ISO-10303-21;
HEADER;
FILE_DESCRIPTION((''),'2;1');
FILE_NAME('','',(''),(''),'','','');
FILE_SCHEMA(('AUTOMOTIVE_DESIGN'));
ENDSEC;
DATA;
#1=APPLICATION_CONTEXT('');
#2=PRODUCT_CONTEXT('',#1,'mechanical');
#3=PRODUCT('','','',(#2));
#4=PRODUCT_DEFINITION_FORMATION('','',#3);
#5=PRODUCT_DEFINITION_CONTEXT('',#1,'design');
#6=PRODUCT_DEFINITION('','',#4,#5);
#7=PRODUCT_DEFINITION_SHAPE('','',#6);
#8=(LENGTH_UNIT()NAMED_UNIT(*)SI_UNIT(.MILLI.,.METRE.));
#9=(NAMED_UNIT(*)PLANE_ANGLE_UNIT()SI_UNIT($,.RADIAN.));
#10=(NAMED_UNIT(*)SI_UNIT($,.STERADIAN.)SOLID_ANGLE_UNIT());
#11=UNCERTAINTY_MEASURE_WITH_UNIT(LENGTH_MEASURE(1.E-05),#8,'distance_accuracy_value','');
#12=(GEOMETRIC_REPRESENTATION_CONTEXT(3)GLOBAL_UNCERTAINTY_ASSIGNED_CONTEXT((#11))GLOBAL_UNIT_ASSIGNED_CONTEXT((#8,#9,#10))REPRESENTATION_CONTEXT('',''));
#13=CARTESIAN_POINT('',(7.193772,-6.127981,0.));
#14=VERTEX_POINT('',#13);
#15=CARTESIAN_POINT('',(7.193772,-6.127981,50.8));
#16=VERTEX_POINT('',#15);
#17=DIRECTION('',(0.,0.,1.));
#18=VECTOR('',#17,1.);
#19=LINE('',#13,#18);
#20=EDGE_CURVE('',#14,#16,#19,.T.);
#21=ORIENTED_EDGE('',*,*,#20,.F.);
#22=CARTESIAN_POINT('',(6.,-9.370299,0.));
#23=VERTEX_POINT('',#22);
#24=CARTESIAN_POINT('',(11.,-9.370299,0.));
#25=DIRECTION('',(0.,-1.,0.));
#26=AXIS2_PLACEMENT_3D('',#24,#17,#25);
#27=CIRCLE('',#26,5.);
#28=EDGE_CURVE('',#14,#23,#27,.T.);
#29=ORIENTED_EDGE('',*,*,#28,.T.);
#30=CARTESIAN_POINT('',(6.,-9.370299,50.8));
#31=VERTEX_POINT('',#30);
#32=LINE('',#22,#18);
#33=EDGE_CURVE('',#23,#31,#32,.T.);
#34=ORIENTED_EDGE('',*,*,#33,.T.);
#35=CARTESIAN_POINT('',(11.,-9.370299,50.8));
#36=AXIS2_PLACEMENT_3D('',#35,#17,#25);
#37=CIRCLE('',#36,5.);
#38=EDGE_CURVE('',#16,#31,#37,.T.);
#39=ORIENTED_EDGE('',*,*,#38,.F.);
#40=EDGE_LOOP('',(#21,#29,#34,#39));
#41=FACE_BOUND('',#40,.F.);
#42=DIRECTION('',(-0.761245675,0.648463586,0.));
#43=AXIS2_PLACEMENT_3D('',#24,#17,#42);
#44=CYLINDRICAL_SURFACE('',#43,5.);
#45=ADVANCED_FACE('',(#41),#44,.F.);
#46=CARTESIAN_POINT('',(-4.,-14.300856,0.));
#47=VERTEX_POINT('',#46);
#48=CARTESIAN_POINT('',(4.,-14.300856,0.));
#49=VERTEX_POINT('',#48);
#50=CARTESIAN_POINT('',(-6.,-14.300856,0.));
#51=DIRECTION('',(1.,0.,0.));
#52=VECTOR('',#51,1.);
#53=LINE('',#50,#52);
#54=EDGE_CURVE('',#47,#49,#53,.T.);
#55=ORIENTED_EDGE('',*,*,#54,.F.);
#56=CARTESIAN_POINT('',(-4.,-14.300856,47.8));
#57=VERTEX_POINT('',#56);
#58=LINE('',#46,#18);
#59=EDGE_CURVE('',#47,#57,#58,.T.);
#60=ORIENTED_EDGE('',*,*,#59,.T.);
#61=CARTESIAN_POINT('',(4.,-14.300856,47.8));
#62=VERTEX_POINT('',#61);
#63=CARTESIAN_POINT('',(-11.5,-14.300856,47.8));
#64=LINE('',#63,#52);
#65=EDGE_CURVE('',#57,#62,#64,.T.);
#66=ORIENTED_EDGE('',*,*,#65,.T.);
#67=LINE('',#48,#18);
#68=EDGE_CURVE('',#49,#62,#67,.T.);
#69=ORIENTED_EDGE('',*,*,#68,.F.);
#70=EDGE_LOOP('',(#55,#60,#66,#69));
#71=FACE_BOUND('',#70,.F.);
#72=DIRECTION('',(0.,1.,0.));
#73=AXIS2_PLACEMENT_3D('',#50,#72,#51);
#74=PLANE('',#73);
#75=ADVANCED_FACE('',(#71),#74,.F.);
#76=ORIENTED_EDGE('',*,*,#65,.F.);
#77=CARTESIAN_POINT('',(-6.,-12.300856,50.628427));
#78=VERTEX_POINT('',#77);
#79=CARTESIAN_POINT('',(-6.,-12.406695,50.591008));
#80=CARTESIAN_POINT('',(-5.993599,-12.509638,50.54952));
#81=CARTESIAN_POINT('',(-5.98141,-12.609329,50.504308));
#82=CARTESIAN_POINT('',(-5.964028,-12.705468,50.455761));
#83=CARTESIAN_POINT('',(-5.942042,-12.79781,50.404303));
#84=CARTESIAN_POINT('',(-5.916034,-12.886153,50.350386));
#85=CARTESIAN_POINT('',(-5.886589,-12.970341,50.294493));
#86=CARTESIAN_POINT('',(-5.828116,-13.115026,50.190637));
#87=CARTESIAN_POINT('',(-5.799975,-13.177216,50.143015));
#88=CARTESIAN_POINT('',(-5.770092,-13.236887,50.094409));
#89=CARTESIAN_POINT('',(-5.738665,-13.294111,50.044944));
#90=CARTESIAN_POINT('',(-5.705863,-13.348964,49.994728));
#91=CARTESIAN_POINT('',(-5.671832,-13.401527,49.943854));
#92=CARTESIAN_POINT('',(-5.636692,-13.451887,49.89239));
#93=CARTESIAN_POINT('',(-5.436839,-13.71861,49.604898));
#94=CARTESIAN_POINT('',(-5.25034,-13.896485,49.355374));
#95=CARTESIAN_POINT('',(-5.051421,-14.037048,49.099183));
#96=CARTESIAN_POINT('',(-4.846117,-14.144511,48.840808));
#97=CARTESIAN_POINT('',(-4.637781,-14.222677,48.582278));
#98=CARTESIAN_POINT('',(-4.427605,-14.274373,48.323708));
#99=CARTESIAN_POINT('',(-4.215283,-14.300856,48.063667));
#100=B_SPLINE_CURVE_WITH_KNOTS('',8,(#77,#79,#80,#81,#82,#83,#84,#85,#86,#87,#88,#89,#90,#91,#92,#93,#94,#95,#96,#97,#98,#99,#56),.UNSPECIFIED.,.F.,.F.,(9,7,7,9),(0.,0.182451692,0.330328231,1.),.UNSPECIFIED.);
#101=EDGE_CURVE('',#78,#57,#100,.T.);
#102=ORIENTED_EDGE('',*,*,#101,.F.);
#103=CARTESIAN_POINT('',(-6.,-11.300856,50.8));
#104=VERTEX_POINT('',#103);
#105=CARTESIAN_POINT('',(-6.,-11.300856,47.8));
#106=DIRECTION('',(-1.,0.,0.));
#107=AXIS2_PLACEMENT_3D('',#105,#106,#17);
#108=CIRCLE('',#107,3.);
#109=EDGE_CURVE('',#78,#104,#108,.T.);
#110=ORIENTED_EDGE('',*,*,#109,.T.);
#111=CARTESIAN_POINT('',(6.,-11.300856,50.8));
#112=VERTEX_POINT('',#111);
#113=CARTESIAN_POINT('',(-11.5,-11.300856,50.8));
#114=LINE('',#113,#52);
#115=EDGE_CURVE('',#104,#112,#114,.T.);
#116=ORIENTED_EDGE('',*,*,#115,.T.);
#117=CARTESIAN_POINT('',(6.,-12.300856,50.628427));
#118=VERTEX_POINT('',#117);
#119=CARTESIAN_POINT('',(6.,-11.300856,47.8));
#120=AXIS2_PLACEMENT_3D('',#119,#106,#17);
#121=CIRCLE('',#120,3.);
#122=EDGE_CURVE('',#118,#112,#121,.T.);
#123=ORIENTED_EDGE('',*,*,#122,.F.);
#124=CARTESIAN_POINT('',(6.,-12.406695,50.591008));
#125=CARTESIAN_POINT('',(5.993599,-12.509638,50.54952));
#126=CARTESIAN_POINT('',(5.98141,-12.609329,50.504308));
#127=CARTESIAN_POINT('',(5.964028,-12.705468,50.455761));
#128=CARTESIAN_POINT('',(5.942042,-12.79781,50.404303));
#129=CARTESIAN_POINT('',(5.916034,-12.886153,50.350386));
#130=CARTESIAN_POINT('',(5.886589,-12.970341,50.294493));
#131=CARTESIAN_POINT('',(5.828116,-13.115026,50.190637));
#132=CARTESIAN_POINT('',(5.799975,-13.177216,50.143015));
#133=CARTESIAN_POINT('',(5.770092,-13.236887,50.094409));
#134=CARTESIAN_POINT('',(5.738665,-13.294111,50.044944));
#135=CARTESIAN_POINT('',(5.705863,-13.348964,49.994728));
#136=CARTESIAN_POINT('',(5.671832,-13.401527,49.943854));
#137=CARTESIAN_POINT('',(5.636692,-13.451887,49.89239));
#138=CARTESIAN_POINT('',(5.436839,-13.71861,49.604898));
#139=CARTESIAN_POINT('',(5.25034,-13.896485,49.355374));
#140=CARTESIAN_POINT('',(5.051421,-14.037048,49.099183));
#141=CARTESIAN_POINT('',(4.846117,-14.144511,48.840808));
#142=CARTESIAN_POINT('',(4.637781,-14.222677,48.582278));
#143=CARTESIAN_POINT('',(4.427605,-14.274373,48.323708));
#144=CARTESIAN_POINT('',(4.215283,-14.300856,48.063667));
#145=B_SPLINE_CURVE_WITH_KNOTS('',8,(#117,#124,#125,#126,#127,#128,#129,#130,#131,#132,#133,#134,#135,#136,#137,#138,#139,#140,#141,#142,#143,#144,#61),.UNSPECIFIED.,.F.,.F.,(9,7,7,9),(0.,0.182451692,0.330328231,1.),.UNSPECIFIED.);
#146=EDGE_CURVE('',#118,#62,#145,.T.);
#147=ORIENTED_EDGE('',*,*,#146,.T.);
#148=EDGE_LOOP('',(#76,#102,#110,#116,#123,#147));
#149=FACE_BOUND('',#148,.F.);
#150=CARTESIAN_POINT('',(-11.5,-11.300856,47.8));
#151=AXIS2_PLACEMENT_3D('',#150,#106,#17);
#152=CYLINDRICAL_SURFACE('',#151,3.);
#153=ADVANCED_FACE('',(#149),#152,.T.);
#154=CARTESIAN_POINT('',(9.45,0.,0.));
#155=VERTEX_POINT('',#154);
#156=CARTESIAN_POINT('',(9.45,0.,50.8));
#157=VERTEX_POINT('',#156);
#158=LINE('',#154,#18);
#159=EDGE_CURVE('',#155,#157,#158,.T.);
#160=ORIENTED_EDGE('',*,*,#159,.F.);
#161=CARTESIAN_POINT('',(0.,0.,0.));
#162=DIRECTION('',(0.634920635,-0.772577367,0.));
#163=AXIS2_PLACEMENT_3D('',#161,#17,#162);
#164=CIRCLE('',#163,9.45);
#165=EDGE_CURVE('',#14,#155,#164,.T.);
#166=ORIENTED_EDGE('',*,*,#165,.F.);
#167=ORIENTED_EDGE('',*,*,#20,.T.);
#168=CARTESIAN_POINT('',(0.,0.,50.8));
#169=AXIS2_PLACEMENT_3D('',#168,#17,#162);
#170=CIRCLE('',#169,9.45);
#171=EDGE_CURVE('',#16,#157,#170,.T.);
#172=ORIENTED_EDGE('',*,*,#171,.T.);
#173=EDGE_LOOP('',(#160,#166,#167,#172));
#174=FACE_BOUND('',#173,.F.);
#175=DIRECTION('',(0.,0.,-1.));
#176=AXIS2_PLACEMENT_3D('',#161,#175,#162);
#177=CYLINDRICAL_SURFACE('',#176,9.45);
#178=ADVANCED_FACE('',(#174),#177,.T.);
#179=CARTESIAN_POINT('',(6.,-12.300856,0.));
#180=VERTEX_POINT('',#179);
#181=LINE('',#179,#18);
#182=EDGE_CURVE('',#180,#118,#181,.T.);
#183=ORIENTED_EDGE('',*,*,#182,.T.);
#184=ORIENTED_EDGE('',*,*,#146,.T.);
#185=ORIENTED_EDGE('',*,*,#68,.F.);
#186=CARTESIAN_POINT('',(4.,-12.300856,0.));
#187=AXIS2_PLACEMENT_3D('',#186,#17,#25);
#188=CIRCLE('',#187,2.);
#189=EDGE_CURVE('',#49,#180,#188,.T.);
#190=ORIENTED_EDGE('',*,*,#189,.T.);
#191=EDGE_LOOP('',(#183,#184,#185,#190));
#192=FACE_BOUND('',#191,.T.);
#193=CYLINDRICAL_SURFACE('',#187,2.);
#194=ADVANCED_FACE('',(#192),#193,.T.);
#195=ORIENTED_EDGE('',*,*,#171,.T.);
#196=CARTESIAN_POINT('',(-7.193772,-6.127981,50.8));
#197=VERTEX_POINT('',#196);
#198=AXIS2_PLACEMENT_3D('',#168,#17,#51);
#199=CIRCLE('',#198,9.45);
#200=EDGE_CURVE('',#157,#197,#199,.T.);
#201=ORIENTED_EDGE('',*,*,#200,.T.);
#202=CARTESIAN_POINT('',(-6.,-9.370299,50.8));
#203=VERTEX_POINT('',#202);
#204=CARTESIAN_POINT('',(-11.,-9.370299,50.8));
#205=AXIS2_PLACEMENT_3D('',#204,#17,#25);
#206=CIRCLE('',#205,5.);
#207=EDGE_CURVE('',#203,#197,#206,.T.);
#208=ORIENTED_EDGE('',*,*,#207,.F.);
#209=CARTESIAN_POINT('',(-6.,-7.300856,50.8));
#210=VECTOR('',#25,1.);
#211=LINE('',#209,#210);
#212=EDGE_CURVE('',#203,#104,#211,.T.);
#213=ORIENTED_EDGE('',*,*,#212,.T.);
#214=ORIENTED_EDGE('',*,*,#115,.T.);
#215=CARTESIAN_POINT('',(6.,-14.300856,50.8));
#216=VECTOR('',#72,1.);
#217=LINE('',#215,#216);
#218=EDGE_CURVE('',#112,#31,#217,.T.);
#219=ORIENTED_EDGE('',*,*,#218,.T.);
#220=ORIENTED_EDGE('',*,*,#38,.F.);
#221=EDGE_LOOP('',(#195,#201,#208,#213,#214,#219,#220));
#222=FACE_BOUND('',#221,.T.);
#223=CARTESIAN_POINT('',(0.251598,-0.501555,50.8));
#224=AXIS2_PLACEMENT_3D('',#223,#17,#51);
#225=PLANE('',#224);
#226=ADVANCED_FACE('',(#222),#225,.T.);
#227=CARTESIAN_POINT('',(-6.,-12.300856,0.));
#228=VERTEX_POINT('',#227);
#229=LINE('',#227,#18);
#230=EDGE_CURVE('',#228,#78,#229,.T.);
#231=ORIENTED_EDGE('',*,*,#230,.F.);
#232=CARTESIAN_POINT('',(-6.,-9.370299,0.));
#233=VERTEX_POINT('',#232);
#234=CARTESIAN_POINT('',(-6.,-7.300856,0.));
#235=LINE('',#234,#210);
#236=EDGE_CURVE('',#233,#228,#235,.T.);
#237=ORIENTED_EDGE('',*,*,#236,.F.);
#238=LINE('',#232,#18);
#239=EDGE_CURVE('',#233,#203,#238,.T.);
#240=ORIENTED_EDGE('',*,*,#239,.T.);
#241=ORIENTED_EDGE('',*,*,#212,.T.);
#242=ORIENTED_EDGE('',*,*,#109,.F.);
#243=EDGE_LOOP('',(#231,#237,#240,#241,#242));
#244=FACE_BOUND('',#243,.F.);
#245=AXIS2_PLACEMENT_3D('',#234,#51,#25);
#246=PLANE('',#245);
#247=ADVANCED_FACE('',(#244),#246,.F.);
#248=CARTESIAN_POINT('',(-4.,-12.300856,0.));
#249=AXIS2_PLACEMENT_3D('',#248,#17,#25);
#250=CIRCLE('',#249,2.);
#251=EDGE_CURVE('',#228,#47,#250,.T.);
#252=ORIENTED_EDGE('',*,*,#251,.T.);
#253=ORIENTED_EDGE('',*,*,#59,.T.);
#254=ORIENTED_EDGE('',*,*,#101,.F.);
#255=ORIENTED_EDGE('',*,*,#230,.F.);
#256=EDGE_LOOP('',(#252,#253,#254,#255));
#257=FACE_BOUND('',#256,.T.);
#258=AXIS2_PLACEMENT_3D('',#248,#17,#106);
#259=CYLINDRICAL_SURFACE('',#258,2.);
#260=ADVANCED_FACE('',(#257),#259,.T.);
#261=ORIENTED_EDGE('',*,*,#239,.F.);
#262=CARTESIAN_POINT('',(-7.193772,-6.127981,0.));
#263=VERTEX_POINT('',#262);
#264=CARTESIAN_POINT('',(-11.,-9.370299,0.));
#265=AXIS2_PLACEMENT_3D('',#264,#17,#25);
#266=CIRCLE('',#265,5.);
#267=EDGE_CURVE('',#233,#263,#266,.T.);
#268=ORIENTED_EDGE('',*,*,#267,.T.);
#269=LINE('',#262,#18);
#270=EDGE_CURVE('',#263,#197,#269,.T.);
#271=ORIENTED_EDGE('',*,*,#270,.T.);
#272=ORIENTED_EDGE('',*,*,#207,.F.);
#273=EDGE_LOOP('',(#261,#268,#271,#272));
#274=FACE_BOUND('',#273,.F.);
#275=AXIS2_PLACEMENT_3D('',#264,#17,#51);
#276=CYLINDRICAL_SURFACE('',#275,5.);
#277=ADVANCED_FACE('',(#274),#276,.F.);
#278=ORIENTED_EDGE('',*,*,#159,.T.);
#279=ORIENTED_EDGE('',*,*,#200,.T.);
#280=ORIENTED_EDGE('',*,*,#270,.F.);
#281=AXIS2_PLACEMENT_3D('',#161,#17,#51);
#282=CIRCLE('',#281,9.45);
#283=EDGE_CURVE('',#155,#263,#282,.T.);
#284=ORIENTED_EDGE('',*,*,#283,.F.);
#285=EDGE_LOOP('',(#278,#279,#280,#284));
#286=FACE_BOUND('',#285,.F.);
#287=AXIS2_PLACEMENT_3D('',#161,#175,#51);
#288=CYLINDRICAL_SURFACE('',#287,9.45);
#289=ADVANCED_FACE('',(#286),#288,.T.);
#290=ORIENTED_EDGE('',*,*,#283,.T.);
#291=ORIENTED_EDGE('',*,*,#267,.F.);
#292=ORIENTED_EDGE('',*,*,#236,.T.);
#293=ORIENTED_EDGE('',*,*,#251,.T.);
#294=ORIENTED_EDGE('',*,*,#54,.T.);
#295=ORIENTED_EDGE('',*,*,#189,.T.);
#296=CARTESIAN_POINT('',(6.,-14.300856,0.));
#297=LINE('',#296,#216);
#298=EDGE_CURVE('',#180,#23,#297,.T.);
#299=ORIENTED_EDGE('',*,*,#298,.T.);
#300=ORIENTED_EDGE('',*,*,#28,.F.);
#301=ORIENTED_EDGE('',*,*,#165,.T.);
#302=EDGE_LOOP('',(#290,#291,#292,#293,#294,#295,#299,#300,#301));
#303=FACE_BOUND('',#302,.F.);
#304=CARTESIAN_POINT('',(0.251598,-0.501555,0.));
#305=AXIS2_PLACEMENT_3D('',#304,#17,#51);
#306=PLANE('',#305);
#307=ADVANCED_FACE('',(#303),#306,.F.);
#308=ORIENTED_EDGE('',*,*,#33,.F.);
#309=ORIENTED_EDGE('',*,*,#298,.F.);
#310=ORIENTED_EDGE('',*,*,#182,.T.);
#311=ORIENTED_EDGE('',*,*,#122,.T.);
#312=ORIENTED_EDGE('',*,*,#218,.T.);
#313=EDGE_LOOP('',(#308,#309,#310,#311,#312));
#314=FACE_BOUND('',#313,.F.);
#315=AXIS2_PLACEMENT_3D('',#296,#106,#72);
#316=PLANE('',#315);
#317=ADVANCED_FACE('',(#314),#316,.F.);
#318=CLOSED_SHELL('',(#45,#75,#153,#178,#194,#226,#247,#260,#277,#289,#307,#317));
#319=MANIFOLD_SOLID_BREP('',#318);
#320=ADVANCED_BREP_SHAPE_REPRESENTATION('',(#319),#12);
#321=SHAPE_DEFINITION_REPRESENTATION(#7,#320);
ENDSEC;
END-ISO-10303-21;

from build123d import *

# Parameters (mm, degrees)
F1_DEPTH    = 50.8
F2_R        = 2
F3_R        = 5
F4_T1_DEPTH = 23


# Not quite as in the source:
# - a fillet or chamfer that OpenCascade refuses, or shapes differently, is made with other operations: its cross-section is extruded or revolved along the edge and cut away or added


with BuildPart() as f1:
    # F0 (on Top) → F1 (new body)
    with BuildSketch(Plane.XY):
        with BuildLine():
            ThreePointArc((6, -7.3008561142), (8.5440768957, -4.0374806501), (9.45, 0))
            ThreePointArc((9.45, 0), (-4.0374806501, 8.5440768957), (-6, -7.3008561142))
            ThreePointArc((-6, -7.3008561142), (0, -9.45), (6, -7.3008561142))
        make_face()
        with BuildLine():
            ThreePointArc((6, -7.3008561142), (0, -9.45), (-6, -7.3008561142))
            Line((-6, -7.3008561142), (-6, -14.3008561142))
            Line((-6, -14.3008561142), (0, -14.3008561142))
            Line((0, -14.3008561142), (6, -14.3008561142))
            Line((6, -14.3008561142), (6, -7.3008561142))
        make_face()
    extrude(amount=F1_DEPTH)

    # F2
    f2_edges = [f1.edges().sort_by_distance(p)[0] for p in [
        (6, -14.300856, 25.4),
        (-6, -14.300856, 25.4),
    ]]
    fillet(f2_edges, radius=F2_R)

    # F3
    f3_edges = [f1.edges().sort_by_distance(p)[0] for p in [
        (-6, -7.300856, 25.4),
        (6, -7.300856, 25.4),
    ]]
    fillet(f3_edges, radius=F3_R)

    # F4: fillet of radius 3 on 1 edges, made by hand

    # F4_s2 → F4_t1 (cut)
    with BuildSketch(Plane.YZ.offset(-11.5)):
        with BuildLine():
            ThreePointArc((-11.3008561142, 50.8), (-13.4221764577, 49.9213203436), (-14.3008561142, 47.8))
            Line((-14.3008561142, 47.8), (-14.3008561142, 50.8))
            Line((-14.3008561142, 50.8), (-11.3008561142, 50.8))
        make_face()
    extrude(amount=F4_T1_DEPTH, mode=Mode.SUBTRACT)


solid = f1.part
